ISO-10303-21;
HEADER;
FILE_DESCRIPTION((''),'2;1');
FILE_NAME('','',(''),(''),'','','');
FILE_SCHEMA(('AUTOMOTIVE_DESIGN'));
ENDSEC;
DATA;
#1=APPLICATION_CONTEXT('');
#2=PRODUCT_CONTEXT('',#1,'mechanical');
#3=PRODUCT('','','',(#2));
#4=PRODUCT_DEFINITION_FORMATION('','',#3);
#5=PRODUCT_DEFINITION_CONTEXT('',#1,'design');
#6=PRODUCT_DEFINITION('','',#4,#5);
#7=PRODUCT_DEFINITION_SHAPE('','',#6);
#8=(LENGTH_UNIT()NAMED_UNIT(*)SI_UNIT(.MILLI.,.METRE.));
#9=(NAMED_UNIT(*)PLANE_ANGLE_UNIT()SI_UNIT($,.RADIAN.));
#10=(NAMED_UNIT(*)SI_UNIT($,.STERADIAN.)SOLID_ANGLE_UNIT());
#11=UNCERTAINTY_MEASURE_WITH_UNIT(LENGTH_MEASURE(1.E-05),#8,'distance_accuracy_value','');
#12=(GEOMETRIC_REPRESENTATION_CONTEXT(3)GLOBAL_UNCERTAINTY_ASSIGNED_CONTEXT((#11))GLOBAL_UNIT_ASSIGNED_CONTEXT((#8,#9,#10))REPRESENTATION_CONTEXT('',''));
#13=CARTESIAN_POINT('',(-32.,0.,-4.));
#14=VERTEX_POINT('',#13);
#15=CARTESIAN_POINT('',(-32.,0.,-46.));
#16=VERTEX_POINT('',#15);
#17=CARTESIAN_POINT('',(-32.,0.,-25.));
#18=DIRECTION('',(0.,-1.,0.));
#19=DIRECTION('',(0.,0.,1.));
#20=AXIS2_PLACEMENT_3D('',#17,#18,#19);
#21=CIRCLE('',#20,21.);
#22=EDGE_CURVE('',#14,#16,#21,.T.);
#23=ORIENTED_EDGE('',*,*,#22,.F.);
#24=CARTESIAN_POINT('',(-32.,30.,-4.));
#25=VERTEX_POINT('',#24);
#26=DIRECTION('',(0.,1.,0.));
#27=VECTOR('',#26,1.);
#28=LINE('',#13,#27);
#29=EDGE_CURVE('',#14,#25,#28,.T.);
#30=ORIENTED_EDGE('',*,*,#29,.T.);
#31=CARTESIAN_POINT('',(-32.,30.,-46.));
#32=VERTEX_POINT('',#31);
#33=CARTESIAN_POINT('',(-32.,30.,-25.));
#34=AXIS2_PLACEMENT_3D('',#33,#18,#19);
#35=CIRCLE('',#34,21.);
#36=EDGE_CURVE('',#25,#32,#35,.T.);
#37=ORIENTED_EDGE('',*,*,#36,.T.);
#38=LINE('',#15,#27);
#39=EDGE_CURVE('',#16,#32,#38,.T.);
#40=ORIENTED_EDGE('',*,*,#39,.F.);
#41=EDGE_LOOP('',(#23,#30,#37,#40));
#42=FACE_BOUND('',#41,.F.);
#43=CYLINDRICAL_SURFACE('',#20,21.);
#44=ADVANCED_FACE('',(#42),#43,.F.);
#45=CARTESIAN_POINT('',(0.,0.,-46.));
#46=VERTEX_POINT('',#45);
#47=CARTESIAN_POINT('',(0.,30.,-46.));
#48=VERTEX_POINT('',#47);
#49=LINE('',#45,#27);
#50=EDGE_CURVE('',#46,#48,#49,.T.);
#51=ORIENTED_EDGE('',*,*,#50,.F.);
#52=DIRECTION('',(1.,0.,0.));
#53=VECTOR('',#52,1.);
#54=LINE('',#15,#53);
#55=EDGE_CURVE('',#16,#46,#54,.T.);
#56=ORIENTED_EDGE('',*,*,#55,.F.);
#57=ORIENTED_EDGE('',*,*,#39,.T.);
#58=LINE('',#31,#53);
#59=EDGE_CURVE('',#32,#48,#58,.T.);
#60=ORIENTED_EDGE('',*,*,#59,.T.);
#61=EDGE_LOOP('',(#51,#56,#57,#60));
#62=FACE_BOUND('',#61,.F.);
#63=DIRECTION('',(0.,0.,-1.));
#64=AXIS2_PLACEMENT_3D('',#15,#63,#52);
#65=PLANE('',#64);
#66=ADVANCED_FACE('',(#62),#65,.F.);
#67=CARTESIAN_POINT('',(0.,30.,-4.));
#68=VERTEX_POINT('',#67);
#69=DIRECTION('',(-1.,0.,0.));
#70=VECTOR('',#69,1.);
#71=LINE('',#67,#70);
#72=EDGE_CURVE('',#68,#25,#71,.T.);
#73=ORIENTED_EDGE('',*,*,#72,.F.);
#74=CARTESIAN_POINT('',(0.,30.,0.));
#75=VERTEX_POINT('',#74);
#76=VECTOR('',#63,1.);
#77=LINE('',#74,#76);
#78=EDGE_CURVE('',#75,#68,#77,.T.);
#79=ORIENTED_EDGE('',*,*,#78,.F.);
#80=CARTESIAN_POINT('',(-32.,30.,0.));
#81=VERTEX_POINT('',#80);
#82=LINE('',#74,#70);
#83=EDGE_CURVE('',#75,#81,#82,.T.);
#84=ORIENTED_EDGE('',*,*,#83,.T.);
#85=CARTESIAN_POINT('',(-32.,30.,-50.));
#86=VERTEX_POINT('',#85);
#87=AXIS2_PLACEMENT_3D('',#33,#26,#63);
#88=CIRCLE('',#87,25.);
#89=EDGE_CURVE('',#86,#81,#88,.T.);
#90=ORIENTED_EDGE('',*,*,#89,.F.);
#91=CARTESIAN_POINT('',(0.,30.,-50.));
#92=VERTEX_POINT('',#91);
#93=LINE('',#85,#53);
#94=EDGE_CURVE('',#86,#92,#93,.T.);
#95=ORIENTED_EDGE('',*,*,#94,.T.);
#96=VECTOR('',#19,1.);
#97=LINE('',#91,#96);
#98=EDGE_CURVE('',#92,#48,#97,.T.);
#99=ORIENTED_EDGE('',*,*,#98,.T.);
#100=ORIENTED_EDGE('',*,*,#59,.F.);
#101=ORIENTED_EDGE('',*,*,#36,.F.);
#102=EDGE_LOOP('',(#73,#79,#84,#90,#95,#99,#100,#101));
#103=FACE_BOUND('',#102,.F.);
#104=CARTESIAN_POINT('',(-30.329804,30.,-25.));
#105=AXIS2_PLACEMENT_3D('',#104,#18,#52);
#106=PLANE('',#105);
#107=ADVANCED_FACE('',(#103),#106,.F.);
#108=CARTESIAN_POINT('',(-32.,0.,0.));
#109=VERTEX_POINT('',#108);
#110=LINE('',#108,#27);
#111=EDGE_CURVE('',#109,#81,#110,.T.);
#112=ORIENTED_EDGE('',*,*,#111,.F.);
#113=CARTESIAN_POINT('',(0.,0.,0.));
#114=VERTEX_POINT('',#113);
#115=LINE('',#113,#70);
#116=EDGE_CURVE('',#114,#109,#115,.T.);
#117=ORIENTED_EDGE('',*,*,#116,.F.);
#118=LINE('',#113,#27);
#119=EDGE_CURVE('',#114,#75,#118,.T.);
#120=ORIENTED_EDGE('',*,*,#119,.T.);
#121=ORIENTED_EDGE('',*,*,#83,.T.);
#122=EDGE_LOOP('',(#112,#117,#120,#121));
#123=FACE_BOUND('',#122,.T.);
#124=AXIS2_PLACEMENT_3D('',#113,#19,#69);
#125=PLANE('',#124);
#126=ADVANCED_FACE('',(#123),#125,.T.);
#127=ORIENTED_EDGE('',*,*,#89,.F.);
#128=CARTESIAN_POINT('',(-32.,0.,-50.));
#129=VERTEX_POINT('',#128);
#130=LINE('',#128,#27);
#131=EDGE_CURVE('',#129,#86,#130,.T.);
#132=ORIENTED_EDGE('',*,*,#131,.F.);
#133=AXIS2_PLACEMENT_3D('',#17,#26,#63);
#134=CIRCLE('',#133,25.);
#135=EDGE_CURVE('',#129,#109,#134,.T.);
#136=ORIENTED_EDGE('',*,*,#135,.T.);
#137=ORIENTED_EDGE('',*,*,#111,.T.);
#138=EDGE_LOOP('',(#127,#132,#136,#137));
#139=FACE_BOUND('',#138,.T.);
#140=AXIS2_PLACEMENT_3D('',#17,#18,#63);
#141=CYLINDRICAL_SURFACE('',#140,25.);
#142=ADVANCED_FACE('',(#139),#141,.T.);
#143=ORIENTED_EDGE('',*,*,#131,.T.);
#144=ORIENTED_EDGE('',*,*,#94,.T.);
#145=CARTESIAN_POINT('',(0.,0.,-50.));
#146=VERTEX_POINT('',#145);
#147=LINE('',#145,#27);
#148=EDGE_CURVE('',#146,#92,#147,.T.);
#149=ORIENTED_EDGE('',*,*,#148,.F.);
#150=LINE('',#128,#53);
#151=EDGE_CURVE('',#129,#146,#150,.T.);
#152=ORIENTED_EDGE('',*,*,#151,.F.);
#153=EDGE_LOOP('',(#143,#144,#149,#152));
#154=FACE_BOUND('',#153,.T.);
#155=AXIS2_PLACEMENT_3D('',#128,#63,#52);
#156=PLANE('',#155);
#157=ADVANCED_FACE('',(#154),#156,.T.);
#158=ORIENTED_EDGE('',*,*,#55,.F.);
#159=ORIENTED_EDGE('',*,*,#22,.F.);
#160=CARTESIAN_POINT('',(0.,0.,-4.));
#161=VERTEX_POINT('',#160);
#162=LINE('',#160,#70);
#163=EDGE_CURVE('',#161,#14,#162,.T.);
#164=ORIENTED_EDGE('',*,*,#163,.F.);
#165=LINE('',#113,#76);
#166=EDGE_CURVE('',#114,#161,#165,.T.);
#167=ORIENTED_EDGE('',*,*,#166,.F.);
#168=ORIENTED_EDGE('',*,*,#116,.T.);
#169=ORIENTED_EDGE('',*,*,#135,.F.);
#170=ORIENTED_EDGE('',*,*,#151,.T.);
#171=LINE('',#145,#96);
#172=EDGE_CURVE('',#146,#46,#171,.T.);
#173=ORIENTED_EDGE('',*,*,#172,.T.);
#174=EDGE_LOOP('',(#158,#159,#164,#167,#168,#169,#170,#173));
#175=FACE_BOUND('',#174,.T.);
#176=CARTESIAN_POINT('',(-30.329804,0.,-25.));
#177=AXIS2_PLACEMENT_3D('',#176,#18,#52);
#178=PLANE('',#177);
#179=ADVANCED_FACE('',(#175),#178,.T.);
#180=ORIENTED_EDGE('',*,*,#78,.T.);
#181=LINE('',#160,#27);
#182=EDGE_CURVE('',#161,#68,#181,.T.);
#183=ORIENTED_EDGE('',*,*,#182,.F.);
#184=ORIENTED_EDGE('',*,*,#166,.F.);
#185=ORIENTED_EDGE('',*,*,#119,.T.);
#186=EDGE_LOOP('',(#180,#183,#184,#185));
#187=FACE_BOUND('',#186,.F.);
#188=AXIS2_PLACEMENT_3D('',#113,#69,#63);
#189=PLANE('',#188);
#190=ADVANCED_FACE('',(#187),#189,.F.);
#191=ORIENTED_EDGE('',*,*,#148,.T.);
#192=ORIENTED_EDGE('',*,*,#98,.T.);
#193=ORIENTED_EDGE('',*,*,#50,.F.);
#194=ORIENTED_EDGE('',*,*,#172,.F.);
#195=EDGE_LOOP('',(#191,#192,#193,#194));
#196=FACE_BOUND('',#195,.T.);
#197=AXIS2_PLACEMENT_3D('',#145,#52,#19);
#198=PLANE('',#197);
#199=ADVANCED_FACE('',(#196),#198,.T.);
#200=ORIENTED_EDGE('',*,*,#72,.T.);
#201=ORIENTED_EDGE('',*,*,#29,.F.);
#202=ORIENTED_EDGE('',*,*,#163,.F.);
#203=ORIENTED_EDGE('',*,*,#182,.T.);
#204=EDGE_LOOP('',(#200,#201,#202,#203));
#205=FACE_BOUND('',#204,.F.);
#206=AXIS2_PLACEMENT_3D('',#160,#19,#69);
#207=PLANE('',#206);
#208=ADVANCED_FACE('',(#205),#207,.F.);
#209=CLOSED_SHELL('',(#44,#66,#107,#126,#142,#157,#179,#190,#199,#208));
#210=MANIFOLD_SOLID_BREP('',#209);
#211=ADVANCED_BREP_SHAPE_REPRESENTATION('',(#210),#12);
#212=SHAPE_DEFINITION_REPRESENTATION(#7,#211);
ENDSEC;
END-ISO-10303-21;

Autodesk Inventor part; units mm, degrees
ref_plane "YZ Plane" through (0, 0, 0) normal (1, 0, 0) x (0, 1, 0)
ref_plane "XZ Plane" through (0, 0, 0) normal (0, 1, 0) x (-1, 0, 0)
ref_plane "XY Plane" through (0, 0, 0) normal (0, 0, 1) x (1, 0, 0)
sketch "Sketch1" plane through (0, 0, 0) normal (0, 1, 0) x (-1, 0, 0)
  line L0 (0, 0) -> (32, 0)
  arc A0 (32, -50) -> (32, 0) centre (32, -25) ccw
  line L1 (32, -50) -> (0, -50)
  dimension "d11" = 50
  dimension "d12" = 32
contour flange "Contour Flange1" sketch "Sketch1" thickness 4 bend radius 4 width 30 along (0, 1, 0) mid plane no both sides no wall seen from (-16, 0, 0) lies toward (0, 0, -1) curves L0 A0 L1
bend "Bend1"
corner "Corner1"
equation "\"d0\" = Thickness"
equation "\"d1\" = BendReliefWidth"
equation "\"d2\" = BendReliefDepth"
equation "\"d3\" = MinimumRemnant"
equation "\"d4\" = TransitionRadius"
equation "\"d6\" = BendRadius"
equation "\"d8\" = CornerReliefSize"
equation "\"d9\" = GapSize"
equation "\"d10\" = JacobiRadiusSize"
equation "\"BendRadius\" = Thickness"
equation "\"BendReliefWidth\" = Thickness"
equation "\"BendReliefDepth\" = 0.5 * Thickness"
equation "\"CornerReliefSize\" = 4 * Thickness"
equation "\"MinimumRemnant\" = 2 * Thickness"
equation "\"TransitionRadius\" = BendRadius"
equation "\"JacobiRadiusSize\" = BendRadius"
equation "\"GapSize\" = Thickness"
equation "\"Thickness\" = 4"
properties part number "bukket del" material "Steel"
